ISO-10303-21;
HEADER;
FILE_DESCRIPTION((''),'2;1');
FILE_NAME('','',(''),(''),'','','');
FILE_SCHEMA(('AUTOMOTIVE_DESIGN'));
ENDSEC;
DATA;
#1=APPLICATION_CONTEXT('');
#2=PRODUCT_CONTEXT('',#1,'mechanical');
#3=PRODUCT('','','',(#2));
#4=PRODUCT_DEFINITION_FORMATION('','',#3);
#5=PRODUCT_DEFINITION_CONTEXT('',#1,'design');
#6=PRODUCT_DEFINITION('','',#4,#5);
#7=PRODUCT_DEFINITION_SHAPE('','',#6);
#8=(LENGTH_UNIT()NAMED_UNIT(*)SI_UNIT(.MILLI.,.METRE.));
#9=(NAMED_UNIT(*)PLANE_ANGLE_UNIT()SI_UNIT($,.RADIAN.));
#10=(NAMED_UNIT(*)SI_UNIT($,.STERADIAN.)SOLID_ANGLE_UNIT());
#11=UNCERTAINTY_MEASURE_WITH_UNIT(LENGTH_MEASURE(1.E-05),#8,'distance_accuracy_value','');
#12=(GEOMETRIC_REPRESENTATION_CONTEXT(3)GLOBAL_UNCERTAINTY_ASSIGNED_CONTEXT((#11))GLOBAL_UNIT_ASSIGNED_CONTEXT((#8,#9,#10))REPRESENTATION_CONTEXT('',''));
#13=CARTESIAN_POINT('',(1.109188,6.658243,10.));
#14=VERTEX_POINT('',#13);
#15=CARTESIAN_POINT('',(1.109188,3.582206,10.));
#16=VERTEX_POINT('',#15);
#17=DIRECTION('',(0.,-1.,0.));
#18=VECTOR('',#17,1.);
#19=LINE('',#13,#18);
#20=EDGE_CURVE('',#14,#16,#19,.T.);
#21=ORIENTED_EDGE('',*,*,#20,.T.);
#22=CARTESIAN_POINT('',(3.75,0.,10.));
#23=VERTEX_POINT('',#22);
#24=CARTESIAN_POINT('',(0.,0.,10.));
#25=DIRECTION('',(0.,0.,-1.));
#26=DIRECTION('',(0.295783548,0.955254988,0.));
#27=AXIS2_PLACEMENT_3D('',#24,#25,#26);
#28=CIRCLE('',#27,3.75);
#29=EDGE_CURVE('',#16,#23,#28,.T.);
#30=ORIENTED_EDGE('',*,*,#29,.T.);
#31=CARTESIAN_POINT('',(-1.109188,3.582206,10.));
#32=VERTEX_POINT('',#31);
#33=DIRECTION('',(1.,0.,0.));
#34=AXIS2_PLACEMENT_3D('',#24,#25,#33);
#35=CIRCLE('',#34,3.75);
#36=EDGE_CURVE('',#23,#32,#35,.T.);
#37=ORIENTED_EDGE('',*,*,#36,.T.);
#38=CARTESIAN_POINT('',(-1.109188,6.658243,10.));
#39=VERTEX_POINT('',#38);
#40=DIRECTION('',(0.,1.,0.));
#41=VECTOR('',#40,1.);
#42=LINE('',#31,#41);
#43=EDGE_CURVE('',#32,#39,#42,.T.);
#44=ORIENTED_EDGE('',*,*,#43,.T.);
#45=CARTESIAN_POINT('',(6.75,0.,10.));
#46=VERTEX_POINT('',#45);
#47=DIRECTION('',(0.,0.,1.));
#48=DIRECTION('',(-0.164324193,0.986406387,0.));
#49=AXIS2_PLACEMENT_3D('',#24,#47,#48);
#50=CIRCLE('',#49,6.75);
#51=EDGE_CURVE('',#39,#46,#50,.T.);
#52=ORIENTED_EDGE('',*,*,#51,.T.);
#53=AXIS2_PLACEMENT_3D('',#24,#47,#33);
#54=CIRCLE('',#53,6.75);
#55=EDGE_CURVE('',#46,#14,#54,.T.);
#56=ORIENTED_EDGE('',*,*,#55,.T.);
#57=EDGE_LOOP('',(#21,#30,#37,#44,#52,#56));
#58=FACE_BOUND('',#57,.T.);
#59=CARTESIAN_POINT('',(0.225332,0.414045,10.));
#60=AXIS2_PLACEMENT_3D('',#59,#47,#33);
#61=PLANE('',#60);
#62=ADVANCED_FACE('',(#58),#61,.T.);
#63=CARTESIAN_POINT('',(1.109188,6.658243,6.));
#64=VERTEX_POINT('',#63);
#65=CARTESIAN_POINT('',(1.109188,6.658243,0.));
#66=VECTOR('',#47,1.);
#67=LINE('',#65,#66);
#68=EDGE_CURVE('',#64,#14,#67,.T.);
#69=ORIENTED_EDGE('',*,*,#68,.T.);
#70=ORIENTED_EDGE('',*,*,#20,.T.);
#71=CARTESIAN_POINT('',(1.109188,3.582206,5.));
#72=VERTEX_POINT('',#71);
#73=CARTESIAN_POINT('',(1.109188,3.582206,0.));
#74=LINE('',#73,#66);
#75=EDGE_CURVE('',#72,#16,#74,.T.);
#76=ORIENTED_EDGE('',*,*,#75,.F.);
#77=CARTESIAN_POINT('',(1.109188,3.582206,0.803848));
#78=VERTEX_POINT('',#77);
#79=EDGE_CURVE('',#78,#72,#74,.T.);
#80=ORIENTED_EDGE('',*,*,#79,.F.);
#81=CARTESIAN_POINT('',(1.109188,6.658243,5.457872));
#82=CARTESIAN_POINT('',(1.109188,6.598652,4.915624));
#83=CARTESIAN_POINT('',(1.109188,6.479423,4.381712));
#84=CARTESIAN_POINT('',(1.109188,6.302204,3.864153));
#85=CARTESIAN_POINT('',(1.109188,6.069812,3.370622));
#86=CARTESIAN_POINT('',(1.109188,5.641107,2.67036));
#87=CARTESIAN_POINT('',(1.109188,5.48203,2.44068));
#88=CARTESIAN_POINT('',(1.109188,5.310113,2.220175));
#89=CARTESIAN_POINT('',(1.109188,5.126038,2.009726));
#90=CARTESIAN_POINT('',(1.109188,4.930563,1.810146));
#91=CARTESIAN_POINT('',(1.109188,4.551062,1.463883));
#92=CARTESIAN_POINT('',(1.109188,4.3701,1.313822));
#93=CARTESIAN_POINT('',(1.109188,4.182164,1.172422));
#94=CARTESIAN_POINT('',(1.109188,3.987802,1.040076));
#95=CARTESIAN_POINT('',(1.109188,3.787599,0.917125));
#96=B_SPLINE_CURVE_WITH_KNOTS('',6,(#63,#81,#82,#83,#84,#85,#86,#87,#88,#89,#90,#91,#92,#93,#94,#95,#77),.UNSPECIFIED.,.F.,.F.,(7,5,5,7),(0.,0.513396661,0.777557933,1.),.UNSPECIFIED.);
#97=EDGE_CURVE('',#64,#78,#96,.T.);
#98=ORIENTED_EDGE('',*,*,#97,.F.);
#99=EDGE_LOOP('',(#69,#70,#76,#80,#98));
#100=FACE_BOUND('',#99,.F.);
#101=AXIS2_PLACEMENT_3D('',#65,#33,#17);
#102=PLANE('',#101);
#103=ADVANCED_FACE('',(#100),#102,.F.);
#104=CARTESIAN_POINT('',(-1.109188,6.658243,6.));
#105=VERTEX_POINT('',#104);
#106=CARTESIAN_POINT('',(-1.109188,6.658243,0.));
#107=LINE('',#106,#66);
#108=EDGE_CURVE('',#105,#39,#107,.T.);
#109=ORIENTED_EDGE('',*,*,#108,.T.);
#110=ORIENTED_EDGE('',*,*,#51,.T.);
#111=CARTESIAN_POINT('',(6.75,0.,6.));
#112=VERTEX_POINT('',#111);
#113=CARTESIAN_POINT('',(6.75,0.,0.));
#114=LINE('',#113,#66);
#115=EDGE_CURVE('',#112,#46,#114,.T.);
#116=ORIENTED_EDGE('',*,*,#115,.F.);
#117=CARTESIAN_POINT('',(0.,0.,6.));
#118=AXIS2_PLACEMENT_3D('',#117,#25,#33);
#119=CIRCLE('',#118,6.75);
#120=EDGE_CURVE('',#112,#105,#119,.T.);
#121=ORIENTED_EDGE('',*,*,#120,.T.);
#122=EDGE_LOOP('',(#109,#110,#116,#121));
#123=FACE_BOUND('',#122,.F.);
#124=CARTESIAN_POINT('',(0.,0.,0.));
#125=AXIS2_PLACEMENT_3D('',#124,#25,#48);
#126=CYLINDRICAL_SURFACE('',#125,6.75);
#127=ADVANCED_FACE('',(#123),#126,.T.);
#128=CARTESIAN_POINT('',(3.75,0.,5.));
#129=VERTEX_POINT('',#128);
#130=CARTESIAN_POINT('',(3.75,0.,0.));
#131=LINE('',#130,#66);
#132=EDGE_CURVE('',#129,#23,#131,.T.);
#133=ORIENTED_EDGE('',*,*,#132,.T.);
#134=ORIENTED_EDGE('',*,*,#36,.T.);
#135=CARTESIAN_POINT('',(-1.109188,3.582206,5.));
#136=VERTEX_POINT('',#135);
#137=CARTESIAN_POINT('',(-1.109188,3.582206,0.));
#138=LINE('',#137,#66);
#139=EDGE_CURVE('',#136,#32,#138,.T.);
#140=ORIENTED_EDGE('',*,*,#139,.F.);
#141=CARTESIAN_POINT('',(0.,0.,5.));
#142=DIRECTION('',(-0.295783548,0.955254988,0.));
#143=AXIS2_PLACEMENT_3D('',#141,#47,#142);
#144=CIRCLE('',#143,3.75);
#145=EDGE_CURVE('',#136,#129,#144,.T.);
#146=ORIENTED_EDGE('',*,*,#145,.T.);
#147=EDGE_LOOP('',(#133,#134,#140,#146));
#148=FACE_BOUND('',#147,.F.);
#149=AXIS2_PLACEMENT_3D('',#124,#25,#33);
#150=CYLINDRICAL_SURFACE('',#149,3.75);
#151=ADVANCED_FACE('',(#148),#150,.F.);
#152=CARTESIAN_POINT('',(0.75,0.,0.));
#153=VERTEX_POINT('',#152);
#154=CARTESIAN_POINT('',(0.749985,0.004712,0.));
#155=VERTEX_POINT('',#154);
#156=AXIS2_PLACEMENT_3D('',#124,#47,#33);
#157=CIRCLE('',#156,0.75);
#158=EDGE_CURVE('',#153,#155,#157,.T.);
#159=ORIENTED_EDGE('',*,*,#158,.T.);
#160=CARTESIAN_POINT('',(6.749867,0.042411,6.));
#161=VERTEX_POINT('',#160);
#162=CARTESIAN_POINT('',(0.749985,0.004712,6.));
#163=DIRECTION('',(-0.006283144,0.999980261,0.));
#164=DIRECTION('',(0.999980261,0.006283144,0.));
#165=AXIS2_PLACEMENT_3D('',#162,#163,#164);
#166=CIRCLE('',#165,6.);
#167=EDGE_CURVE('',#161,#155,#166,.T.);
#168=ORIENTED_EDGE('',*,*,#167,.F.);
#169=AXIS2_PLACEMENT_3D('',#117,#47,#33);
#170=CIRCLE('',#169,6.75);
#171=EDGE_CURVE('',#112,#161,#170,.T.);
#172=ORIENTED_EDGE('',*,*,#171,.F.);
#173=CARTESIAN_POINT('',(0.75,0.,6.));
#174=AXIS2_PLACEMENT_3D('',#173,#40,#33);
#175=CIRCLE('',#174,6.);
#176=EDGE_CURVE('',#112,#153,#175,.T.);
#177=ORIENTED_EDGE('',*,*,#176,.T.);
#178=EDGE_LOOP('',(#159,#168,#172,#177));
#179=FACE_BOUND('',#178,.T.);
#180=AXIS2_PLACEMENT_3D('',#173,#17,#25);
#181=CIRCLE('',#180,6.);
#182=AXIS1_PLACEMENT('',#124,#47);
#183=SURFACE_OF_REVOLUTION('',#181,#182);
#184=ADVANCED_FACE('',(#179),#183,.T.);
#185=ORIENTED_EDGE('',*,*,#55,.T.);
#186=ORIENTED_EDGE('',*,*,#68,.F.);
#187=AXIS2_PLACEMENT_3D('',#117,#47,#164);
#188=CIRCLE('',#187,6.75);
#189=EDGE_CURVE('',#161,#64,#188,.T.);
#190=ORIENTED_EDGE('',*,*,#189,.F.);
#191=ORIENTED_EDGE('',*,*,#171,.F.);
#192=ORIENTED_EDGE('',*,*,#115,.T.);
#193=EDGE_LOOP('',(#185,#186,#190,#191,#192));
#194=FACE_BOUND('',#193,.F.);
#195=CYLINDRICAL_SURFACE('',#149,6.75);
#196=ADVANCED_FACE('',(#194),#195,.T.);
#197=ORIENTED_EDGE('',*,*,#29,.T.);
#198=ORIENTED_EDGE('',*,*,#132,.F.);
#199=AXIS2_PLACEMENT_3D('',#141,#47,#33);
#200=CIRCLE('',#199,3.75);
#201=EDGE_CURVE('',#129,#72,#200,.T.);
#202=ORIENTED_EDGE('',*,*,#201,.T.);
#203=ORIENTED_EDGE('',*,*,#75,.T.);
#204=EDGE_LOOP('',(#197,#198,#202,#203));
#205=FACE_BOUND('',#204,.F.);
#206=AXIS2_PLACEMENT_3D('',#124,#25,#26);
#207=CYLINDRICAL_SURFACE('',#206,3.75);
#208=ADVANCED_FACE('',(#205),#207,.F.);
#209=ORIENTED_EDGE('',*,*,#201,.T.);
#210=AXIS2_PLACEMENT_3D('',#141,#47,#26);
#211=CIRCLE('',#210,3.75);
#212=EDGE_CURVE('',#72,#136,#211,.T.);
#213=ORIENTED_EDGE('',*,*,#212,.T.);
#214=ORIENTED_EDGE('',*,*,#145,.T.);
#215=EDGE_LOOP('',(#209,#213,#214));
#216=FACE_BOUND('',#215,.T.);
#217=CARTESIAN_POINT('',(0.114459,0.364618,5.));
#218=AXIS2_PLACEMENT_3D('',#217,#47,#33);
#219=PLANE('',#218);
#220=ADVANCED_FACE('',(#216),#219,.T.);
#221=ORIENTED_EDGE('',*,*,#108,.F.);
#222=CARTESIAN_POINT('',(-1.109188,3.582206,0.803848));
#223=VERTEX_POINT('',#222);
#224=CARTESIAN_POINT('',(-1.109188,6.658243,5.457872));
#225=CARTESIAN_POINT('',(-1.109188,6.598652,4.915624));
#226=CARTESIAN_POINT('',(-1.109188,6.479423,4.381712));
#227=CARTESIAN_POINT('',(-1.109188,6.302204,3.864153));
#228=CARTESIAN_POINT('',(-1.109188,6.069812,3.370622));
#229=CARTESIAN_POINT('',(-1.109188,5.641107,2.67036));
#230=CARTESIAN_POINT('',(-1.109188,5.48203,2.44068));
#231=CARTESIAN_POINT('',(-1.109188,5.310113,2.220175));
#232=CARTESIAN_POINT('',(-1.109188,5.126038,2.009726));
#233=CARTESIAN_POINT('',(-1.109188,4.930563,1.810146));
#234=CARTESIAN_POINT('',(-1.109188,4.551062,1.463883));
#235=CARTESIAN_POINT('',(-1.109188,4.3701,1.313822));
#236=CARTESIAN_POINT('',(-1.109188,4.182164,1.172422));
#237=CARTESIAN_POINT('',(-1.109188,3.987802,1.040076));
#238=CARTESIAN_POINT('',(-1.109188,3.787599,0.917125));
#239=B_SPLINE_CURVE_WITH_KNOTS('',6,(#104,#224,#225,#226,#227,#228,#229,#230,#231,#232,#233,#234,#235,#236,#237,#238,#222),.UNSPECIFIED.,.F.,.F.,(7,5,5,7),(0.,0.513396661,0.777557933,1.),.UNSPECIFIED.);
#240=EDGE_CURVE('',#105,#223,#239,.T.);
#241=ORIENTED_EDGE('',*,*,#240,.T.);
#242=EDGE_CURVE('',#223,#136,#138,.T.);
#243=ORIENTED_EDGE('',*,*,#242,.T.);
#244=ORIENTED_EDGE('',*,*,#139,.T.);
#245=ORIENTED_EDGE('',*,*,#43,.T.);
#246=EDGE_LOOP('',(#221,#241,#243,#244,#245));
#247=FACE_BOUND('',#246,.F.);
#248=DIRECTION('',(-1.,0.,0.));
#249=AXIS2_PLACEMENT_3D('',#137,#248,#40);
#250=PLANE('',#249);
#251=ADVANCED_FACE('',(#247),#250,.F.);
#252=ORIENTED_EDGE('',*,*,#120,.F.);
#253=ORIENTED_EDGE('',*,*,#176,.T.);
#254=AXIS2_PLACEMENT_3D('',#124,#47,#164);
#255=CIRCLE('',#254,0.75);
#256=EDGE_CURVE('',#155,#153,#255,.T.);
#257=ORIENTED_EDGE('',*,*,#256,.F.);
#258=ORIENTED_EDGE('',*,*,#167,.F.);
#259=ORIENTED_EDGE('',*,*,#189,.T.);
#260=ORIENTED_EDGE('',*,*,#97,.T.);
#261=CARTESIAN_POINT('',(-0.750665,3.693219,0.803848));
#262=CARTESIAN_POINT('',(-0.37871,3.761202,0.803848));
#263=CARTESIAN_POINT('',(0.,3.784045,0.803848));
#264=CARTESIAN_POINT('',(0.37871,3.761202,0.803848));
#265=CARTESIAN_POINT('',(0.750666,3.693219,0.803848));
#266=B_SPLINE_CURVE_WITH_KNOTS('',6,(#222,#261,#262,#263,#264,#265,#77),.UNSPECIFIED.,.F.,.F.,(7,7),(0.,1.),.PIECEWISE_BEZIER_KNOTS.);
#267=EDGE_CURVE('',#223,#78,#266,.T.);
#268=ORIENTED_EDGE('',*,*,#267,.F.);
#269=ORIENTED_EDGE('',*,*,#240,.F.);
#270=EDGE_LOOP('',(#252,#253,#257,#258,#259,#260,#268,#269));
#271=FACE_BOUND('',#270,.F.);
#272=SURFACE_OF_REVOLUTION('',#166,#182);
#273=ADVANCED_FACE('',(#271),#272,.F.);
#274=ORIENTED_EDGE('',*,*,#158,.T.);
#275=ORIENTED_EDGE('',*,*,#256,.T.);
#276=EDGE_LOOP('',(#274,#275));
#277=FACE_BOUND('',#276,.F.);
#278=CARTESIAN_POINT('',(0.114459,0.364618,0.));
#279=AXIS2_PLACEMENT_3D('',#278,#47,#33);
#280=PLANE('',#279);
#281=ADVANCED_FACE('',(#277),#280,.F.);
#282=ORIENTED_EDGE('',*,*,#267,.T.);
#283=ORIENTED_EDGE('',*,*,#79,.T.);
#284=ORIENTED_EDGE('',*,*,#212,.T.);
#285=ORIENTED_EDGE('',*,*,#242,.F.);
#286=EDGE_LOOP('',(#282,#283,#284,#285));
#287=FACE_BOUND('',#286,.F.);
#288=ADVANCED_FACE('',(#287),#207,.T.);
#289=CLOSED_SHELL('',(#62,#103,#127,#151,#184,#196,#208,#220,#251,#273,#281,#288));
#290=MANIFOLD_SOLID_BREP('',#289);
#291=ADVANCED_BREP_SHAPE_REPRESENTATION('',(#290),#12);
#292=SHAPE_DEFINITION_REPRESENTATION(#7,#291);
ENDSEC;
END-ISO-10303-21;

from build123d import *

# Parameters (mm, degrees)
F1_DEPTH    = 10
F2_DEPTH    = 5
F3_T2_ANGLE = 359.64
F3_T4_ANGLE = 207.9069363925


# Not quite as in the source:
# - a fillet or chamfer that OpenCascade refuses, or shapes differently, is made with other operations: its cross-section is extruded or revolved along the edge and cut away or added


with BuildPart() as f1:
    # F0 (on Top) → F1 (new body)
    with BuildSketch(Plane.XY):
        with BuildLine():
            ThreePointArc((1.1091883061, 3.5822062059), (3.0184396754, 2.2252015473), (3.75, 0))
            ThreePointArc((3.75, 0), (-2.2252015473, -3.0184396754), (-1.1091883061, 3.5822062059))
            Line((-1.1091883061, 3.5822062059), (-1.1091883061, 6.6582431092))
            ThreePointArc((-1.1091883061, 6.6582431092), (-4.3632258097, -5.1502194646), (6.75, 0))
            ThreePointArc((6.75, 0), (5.1502194646, 4.3632258097), (1.1091883061, 6.6582431092))
            Line((1.1091883061, 6.6582431092), (1.1091883061, 3.5822062059))
        make_face()
    extrude(amount=F1_DEPTH)

    # F0 (on Top) → F2 (join)
    with BuildSketch(Plane.XY):
        with BuildLine():
            ThreePointArc((-1.1091883061, 3.5822062059), (-2.2252015473, -3.0184396754), (3.75, 0))
            ThreePointArc((3.75, 0), (3.0184396754, 2.2252015473), (1.1091883061, 3.5822062059))
            Line((1.1091883061, 3.5822062059), (1.1091883061, 0.75))
            Line((1.1091883061, 0.75), (-1.1091883061, 0.75))
            Line((-1.1091883061, 0.75), (-1.1091883061, 3.5822062059))
        make_face()
        with BuildLine():
            Line((1.1091883061, 0.75), (1.1091883061, 3.5822062059))
            ThreePointArc((1.1091883061, 3.5822062059), (0, 3.75), (-1.1091883061, 3.5822062059))
            Line((-1.1091883061, 3.5822062059), (-1.1091883061, 0.75))
            Line((-1.1091883061, 0.75), (1.1091883061, 0.75))
        make_face()
    extrude(amount=F2_DEPTH)

    # F3: fillet of radius 6 on 1 edges, made by hand

    # F3_s1 → F3_t2 (revolve, cut)
    with BuildSketch(Plane(origin=(0, 0, 0), x_dir=(0, 0, 1), z_dir=(0.006283144, -0.9999802609, 0))):
        with BuildLine():
            ThreePointArc((6, -6.75), (1.7573593129, -4.9926406871), (0, -0.75))
            Line((0, -0.75), (0, -6.75))
            Line((0, -6.75), (6, -6.75))
        make_face()
    revolve(axis=Axis((0, 0, 0), (0, 0, 1)), revolution_arc=F3_T2_ANGLE, mode=Mode.SUBTRACT)

    # F3_s3 → F3_t4 (revolve, cut)
    with BuildSketch(Plane.XZ):
        with BuildLine():
            ThreePointArc((0.75, 0), (4.9926406871, 1.7573593129), (6.75, 6))
            Line((6.75, 6), (6.75, 0))
            Line((6.75, 0), (0.75, 0))
        make_face()
    revolve(axis=Axis((0, 0, 0), (0, 0, 1)), revolution_arc=F3_T4_ANGLE, mode=Mode.SUBTRACT)


solid = f1.part
